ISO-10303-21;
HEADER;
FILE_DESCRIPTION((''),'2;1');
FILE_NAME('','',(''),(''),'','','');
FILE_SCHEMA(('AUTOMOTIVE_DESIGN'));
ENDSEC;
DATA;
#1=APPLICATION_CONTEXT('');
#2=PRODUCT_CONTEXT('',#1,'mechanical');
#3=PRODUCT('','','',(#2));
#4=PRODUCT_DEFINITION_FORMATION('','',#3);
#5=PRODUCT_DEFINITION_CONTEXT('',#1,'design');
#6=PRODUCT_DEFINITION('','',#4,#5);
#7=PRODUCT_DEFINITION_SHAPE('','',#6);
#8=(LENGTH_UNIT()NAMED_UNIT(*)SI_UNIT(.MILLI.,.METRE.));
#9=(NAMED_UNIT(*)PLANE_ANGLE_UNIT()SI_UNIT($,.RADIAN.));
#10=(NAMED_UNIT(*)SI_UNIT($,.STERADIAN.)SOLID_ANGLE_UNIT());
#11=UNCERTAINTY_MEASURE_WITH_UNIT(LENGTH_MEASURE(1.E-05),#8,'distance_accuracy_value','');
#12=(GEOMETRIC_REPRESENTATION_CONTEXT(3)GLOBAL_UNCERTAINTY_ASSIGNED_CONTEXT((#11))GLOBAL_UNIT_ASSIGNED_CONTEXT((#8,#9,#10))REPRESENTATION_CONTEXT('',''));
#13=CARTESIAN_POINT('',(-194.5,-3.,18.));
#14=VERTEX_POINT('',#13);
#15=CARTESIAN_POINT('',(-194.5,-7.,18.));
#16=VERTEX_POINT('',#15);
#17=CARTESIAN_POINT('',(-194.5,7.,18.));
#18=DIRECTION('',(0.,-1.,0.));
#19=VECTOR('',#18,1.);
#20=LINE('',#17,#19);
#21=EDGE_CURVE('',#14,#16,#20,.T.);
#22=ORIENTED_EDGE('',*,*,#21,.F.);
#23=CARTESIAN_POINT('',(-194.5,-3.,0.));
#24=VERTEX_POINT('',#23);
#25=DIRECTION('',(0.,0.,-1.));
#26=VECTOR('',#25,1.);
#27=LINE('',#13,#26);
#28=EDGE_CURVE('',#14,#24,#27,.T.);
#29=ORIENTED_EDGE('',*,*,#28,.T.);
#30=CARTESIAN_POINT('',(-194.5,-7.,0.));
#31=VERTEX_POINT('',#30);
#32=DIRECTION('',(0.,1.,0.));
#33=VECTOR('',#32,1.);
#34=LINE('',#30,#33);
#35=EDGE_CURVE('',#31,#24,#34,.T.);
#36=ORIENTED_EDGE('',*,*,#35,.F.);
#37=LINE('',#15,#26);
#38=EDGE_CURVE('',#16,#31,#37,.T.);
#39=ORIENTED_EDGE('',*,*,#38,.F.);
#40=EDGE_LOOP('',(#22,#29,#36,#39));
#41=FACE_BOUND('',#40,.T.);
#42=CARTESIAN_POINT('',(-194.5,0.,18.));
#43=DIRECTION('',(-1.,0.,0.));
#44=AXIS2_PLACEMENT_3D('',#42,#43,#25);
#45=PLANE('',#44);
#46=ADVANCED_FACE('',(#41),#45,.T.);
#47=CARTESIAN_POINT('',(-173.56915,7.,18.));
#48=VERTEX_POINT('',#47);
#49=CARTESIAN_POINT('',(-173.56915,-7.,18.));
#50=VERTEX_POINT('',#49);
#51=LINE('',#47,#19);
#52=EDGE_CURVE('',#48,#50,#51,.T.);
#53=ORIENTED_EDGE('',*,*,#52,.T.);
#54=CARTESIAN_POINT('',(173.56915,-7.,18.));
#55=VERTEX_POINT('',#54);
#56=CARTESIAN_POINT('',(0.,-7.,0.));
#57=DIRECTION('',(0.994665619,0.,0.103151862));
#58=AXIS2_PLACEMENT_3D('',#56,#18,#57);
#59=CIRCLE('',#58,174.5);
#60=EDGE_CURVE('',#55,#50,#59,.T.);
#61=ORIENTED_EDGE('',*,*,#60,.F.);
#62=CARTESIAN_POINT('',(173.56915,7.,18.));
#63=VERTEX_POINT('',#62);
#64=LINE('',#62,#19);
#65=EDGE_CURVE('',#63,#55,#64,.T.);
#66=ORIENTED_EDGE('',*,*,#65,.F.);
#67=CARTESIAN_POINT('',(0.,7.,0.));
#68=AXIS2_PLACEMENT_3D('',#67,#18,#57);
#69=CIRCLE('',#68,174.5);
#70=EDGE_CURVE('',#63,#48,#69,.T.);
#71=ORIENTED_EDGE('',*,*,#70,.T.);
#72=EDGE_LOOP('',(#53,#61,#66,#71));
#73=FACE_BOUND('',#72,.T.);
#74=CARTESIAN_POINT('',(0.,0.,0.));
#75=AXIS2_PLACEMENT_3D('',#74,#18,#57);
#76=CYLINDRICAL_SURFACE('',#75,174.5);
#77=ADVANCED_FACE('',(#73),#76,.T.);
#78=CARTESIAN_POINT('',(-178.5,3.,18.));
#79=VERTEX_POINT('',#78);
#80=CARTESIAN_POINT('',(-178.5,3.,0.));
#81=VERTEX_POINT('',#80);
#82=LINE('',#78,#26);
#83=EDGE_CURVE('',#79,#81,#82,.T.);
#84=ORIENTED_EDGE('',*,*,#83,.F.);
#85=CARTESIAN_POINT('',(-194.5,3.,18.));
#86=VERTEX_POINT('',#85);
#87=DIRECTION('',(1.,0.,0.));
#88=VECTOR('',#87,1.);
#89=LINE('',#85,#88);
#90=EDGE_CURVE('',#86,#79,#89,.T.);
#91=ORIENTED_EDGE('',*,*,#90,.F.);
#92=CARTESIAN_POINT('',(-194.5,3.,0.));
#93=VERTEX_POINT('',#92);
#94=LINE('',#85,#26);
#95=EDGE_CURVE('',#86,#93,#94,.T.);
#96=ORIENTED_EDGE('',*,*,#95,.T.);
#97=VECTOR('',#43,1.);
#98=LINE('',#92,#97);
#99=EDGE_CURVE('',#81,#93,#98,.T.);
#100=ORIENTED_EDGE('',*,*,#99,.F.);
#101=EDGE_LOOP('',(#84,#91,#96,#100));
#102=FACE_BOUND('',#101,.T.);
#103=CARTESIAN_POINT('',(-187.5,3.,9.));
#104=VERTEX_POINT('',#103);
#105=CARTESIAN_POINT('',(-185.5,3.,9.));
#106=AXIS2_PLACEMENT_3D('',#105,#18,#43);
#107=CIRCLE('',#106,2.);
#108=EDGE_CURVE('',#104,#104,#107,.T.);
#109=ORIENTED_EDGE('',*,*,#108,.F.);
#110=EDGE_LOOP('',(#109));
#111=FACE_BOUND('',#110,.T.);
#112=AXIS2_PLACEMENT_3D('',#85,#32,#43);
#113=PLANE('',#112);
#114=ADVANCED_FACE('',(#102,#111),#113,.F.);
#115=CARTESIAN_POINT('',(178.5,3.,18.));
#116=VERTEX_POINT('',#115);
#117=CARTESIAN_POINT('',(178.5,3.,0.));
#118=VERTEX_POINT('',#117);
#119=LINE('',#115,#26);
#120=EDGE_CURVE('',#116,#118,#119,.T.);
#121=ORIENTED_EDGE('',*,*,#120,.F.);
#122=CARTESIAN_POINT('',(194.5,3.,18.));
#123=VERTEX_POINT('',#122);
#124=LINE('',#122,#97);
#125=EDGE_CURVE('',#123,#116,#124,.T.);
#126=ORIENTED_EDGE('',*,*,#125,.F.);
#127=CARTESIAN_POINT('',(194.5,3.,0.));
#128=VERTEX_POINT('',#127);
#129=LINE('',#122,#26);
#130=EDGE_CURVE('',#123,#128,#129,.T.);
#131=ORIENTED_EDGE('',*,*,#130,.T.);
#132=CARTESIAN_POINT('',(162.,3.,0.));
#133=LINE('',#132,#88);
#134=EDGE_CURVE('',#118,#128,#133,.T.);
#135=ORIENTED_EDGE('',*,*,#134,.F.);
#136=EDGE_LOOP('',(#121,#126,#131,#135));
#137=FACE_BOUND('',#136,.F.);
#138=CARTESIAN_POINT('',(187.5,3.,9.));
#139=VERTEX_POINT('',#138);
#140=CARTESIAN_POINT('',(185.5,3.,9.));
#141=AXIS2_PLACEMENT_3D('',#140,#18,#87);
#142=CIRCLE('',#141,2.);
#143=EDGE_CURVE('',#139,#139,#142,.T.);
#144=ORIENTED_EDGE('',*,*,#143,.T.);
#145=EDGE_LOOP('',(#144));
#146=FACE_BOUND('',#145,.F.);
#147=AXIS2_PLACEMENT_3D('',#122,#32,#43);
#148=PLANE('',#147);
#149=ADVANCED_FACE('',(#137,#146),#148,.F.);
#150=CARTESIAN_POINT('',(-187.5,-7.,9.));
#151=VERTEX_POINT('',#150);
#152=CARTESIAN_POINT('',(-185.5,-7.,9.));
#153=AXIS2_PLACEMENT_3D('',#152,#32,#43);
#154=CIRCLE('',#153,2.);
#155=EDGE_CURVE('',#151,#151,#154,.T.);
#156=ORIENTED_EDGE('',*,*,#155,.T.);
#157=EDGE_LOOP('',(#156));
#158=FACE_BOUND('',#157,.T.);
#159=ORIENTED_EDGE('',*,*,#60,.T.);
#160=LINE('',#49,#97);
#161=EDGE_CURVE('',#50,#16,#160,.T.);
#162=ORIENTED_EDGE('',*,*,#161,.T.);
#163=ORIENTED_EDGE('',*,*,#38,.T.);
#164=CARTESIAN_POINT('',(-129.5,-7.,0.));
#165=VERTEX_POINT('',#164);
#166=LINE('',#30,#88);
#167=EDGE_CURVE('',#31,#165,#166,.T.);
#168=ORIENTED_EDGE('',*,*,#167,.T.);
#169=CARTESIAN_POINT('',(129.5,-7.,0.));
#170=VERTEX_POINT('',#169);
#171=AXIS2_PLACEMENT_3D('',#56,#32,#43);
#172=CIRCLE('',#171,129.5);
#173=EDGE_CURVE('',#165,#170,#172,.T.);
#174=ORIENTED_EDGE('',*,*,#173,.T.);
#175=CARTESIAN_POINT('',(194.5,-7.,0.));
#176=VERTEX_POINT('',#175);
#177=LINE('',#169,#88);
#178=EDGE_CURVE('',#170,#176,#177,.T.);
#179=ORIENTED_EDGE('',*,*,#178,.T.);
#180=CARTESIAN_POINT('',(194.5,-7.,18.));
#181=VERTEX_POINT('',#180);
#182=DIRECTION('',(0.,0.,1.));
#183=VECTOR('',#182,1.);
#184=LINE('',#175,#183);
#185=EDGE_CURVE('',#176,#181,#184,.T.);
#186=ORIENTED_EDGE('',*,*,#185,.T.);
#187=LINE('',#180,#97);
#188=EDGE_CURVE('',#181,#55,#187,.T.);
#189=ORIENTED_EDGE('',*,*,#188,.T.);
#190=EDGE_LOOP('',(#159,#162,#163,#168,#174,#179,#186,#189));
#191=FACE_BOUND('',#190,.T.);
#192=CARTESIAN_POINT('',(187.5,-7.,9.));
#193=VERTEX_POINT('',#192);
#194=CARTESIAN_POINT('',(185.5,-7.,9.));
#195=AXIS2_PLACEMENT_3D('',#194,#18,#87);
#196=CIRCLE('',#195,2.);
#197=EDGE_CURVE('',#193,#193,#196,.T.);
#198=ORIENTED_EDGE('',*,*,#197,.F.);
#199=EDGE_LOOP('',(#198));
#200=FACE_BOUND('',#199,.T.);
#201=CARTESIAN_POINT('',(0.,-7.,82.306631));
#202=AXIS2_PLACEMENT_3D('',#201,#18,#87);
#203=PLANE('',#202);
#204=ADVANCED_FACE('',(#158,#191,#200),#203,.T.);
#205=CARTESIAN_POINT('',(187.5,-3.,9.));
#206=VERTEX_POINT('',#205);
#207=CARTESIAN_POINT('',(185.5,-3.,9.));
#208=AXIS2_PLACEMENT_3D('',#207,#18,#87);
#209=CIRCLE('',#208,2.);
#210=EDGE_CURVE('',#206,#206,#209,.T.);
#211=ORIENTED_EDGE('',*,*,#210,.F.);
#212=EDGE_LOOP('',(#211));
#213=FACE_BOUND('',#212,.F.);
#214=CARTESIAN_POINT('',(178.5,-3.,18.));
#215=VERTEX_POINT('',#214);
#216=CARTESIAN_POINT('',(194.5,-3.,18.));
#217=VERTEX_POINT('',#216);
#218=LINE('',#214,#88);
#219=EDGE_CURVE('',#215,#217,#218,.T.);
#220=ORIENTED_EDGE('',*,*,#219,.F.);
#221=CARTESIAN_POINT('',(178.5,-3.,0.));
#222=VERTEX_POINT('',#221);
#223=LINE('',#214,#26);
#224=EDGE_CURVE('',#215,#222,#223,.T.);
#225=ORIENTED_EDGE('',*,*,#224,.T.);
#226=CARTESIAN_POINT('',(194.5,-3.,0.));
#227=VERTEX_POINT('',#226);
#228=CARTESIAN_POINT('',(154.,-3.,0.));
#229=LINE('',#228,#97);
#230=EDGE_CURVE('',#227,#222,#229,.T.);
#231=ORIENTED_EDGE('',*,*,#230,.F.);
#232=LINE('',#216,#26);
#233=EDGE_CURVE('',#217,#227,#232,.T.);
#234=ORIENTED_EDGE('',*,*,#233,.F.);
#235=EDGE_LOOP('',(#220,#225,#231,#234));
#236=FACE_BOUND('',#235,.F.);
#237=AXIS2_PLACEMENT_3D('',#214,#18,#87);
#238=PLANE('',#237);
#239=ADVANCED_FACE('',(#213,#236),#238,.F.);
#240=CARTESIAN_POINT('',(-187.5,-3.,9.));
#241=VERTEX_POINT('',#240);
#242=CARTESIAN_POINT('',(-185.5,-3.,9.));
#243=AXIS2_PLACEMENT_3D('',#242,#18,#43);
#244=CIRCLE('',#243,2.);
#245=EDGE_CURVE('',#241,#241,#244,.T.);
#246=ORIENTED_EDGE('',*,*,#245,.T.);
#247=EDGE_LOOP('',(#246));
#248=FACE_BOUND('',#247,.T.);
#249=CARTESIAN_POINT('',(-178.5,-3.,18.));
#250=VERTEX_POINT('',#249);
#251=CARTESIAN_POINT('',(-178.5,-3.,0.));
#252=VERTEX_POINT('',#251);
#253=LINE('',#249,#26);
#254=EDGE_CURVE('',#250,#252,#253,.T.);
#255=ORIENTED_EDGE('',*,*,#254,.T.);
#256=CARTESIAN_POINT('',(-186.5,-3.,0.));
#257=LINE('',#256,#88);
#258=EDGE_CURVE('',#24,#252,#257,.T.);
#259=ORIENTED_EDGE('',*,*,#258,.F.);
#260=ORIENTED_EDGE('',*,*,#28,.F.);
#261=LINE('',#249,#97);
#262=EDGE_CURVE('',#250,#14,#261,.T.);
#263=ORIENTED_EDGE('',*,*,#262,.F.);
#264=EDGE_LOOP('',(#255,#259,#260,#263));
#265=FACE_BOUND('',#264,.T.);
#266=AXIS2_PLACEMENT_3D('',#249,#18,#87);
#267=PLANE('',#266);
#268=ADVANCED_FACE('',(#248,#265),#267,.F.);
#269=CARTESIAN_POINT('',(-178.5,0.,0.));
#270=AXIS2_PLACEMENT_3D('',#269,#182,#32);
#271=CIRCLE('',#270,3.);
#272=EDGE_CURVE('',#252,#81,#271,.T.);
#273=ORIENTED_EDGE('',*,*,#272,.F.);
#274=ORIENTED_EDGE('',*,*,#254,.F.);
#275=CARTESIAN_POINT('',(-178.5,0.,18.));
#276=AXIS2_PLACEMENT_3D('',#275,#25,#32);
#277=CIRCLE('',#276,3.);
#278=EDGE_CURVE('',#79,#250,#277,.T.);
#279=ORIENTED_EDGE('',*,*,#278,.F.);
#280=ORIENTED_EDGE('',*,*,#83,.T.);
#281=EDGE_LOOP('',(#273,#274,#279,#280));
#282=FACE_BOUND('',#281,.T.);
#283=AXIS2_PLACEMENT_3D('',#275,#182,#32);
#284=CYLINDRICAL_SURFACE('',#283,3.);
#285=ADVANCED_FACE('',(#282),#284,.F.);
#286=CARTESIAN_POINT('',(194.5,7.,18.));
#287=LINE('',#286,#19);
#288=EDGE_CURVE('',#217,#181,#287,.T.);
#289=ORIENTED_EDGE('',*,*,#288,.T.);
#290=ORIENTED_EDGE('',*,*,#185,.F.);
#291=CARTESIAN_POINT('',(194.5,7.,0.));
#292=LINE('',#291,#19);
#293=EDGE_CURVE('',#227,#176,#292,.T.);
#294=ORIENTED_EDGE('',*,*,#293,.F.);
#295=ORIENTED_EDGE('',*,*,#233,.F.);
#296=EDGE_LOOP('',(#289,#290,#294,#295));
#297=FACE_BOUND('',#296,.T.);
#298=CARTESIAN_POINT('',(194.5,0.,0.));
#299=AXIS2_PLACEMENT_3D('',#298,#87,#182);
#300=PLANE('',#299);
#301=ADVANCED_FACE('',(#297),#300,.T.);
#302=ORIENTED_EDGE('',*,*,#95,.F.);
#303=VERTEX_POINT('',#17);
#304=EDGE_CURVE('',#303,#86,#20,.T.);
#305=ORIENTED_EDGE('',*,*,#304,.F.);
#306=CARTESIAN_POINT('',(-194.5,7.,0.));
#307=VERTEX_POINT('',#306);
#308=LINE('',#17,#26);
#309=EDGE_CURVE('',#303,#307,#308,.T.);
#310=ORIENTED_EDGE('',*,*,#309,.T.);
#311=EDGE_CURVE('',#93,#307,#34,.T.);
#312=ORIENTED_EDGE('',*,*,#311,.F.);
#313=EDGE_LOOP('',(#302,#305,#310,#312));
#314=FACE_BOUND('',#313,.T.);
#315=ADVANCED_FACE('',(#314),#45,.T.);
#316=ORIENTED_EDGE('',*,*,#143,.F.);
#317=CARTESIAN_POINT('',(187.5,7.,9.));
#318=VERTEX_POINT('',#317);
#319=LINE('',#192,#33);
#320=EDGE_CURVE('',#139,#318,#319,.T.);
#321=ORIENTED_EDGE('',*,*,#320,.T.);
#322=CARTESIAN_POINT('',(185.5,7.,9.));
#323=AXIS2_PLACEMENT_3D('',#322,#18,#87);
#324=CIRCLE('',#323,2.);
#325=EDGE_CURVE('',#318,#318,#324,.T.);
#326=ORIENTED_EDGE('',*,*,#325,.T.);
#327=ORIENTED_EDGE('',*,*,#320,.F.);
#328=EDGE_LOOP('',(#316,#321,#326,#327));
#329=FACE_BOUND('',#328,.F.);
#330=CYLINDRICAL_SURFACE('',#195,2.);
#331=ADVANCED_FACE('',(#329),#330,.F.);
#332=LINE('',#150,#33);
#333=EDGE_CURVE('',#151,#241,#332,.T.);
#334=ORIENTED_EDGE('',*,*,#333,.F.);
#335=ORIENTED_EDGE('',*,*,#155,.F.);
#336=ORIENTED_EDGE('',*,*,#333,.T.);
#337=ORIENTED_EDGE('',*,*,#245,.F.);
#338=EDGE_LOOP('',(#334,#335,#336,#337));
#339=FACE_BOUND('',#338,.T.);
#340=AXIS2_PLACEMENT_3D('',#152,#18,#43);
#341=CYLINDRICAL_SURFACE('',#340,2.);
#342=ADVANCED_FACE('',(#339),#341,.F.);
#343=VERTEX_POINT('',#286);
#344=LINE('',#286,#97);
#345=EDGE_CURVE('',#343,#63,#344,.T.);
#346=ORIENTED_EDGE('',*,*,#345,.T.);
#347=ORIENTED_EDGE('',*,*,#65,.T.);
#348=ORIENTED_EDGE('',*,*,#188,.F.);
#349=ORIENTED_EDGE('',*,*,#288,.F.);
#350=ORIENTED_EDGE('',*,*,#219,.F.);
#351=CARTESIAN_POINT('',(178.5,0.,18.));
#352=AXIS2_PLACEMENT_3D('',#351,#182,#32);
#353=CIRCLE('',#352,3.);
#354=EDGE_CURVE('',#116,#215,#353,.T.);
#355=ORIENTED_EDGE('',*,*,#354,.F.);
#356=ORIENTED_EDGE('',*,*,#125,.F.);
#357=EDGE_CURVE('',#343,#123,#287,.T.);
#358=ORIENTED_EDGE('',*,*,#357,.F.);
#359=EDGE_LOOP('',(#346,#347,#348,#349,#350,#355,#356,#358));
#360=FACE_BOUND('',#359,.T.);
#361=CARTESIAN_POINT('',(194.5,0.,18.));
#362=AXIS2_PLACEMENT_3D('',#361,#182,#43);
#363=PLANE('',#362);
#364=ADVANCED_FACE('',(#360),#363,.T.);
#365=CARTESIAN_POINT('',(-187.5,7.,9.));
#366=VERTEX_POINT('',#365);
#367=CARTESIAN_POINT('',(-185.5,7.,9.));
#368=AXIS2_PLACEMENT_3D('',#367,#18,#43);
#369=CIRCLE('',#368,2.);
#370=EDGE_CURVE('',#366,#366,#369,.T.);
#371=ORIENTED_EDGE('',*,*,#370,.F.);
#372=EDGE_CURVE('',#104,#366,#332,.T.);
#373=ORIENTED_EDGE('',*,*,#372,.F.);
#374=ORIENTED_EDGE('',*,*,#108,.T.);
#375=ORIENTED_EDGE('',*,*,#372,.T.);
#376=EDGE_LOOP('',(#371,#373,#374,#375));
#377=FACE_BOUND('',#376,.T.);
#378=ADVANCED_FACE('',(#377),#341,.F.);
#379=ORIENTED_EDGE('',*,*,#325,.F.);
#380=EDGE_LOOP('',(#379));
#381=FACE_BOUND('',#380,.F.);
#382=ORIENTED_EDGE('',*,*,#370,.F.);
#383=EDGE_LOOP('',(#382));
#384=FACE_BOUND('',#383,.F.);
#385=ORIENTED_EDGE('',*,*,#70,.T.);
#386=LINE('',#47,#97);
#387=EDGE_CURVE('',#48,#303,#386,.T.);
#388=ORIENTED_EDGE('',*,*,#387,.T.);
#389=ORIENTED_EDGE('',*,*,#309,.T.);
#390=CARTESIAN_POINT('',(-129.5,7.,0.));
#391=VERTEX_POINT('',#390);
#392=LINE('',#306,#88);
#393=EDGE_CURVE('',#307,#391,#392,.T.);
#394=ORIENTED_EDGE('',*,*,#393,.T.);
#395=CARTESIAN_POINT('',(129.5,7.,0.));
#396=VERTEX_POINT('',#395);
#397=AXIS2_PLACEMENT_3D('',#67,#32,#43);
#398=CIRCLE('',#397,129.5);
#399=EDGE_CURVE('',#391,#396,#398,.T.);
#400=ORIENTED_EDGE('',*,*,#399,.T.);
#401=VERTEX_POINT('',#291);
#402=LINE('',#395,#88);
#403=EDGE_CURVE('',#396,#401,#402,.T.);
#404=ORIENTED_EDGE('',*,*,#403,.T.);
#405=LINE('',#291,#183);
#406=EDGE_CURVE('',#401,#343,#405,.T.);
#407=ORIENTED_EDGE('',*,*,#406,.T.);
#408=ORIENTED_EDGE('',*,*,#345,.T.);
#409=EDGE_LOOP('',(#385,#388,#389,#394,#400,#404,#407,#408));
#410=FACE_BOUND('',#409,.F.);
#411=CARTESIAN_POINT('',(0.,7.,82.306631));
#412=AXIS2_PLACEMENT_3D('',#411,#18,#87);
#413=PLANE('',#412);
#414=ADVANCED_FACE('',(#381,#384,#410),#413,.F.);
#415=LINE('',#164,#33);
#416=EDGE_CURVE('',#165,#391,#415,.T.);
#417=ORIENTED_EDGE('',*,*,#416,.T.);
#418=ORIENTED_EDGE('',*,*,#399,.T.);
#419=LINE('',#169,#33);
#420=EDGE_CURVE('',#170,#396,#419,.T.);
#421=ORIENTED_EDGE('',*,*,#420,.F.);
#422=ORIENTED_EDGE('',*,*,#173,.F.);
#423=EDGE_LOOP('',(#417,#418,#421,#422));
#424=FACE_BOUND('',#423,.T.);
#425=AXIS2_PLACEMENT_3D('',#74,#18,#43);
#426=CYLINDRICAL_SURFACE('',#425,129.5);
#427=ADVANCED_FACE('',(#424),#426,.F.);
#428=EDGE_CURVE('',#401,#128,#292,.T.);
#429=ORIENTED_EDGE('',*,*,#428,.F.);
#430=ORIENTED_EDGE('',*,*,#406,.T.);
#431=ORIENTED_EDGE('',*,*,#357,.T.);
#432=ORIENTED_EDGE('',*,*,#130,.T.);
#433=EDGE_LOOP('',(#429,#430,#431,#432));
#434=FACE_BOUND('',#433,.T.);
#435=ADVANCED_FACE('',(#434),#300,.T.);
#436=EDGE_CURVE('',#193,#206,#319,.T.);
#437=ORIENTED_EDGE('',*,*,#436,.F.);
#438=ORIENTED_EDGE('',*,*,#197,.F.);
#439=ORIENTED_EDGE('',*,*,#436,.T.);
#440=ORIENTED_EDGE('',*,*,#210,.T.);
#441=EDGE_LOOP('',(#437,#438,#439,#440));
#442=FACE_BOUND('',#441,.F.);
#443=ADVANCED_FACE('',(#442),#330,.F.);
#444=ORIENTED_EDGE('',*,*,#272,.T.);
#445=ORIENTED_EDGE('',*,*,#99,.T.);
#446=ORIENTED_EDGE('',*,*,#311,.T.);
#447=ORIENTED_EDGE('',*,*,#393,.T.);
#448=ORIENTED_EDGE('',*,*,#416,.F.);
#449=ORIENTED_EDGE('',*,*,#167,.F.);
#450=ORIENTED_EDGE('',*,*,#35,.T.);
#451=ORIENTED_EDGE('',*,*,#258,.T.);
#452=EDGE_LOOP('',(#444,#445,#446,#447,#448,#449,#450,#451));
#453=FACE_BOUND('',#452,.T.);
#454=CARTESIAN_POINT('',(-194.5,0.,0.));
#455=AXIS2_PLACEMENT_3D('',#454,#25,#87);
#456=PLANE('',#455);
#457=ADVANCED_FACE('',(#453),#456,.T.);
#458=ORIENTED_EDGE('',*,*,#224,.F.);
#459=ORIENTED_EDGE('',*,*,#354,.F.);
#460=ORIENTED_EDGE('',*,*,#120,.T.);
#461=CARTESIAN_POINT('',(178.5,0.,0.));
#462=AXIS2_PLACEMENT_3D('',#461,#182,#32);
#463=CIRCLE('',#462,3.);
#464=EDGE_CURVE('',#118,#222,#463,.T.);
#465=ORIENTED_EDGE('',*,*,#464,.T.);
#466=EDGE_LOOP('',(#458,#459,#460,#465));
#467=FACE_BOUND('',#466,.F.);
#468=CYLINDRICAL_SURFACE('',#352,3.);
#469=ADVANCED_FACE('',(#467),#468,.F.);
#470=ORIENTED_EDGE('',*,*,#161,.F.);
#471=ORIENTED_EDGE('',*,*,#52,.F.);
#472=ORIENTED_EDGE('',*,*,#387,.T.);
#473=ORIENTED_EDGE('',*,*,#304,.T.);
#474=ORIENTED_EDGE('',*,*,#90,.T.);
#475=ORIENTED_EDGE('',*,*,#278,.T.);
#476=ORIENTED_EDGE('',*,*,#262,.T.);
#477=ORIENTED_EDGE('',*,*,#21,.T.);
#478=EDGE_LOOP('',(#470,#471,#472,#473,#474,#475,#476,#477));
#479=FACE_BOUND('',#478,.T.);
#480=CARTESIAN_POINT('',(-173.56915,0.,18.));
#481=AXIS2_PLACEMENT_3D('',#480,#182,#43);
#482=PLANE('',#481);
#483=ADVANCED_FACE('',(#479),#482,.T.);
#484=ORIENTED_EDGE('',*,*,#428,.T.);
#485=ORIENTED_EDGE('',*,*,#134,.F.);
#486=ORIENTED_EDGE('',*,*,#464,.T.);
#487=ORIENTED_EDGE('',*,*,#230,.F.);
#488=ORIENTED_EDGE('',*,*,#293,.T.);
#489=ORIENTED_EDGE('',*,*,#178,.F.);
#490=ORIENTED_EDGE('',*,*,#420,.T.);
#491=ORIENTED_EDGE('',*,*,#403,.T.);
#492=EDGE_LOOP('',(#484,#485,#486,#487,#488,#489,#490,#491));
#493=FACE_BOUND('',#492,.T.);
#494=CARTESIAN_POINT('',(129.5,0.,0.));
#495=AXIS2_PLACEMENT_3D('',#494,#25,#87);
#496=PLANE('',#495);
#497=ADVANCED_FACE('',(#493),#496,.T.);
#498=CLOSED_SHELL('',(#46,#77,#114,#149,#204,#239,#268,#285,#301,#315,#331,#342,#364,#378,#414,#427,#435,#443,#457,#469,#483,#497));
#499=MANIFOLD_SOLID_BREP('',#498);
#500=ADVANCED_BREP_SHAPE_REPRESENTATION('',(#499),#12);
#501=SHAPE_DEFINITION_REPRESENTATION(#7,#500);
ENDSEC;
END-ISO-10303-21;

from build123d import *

# Parameters (mm, degrees)
F1_DEPTH = 7
F2_DEPTH = 6
F3_R     = 2
F4_DEPTH = 25
F6_DEPTH = 25


# Not quite as in the source:
# - a pattern or mirror of a feature is missing from the dataset's text; its kind, count and spacing are read off the source's solid


with BuildPart() as f1:
    # F0 (on Front) → F1 (new body, symmetric)
    with BuildSketch(Plane.XZ):
        with BuildLine():
            Line((129.5, 0), (174.5, 0))
            ThreePointArc((174.5, 0), (174.2671322418, 9.0120264206), (173.5691504848, 18))
            ThreePointArc((173.5691504848, 18), (0, 174.5), (-173.5691504848, 18))
            ThreePointArc((-173.5691504848, 18), (-174.2671322418, 9.0120264206), (-174.5, 0))
            Line((-174.5, 0), (-129.5, 0))
            ThreePointArc((-129.5, 0), (0, 129.5), (129.5, 0))
        make_face()
        with BuildLine():
            ThreePointArc((173.5691504848, 18), (174.2671322418, 9.0120264206), (174.5, 0))
            Line((174.5, 0), (194.5, 0))
            Line((194.5, 0), (194.5, 18))
            Line((194.5, 18), (173.5691504848, 18))
        make_face()
        with BuildLine():
            ThreePointArc((-174.5, 0), (-174.2671322418, 9.0120264206), (-173.5691504848, 18))
            Line((-173.5691504848, 18), (-194.5, 18))
            Line((-194.5, 18), (-194.5, 0))
            Line((-194.5, 0), (-174.5, 0))
        make_face()
    extrude(amount=F1_DEPTH, both=True)

    # F0 (on Front) → F2 (join, symmetric)
    with BuildSketch(Plane.XZ):
        with BuildLine():
            Line((129.5, 0), (174.5, 0))
            ThreePointArc((174.5, 0), (174.2671322418, 9.0120264206), (173.5691504848, 18))
            ThreePointArc((173.5691504848, 18), (0, 174.5), (-173.5691504848, 18))
            ThreePointArc((-173.5691504848, 18), (-174.2671322418, 9.0120264206), (-174.5, 0))
            Line((-174.5, 0), (-129.5, 0))
            ThreePointArc((-129.5, 0), (0, 129.5), (129.5, 0))
        make_face()
        with BuildLine():
            ThreePointArc((173.5691504848, 18), (174.2671322418, 9.0120264206), (174.5, 0))
            Line((174.5, 0), (194.5, 0))
            Line((194.5, 0), (194.5, 18))
            Line((194.5, 18), (173.5691504848, 18))
        make_face()
        with BuildLine():
            ThreePointArc((-174.5, 0), (-174.2671322418, 9.0120264206), (-173.5691504848, 18))
            Line((-173.5691504848, 18), (-194.5, 18))
            Line((-194.5, 18), (-194.5, 0))
            Line((-194.5, 0), (-174.5, 0))
        make_face()
    extrude(amount=F2_DEPTH, both=True)

    # F3 (on face) → F4 (cut)
    with BuildSketch(Plane.XZ.offset(7)):
        with Locations((185.5, 9)):
            Circle(F3_R)
    f4 = extrude(amount=-F4_DEPTH, mode=Mode.SUBTRACT)

    # F4_copies: F4 across plane
    add(f4.mirror(Plane(origin=(0, 0, 0), x_dir=(0, 0, -1), z_dir=(-1, 0, 0))), mode=Mode.SUBTRACT)

    # F5 (on face) → F6 (cut)
    with BuildSketch(Plane.XY.offset(18)):
        with BuildLine():
            Line((194.5, 3), (178.5, 3))
            ThreePointArc((178.5, 3), (175.5, 0), (178.5, -3))
            Line((178.5, -3), (194.5, -3))
            Line((194.5, -3), (194.5, 3))
        make_face()
    f6 = extrude(amount=-F6_DEPTH, mode=Mode.SUBTRACT)

    # F6_copies: F6 across plane
    add(f6.mirror(Plane(origin=(0, 0, 0), x_dir=(0, 0, -1), z_dir=(-1, 0, 0))), mode=Mode.SUBTRACT)


solid = f1.part
